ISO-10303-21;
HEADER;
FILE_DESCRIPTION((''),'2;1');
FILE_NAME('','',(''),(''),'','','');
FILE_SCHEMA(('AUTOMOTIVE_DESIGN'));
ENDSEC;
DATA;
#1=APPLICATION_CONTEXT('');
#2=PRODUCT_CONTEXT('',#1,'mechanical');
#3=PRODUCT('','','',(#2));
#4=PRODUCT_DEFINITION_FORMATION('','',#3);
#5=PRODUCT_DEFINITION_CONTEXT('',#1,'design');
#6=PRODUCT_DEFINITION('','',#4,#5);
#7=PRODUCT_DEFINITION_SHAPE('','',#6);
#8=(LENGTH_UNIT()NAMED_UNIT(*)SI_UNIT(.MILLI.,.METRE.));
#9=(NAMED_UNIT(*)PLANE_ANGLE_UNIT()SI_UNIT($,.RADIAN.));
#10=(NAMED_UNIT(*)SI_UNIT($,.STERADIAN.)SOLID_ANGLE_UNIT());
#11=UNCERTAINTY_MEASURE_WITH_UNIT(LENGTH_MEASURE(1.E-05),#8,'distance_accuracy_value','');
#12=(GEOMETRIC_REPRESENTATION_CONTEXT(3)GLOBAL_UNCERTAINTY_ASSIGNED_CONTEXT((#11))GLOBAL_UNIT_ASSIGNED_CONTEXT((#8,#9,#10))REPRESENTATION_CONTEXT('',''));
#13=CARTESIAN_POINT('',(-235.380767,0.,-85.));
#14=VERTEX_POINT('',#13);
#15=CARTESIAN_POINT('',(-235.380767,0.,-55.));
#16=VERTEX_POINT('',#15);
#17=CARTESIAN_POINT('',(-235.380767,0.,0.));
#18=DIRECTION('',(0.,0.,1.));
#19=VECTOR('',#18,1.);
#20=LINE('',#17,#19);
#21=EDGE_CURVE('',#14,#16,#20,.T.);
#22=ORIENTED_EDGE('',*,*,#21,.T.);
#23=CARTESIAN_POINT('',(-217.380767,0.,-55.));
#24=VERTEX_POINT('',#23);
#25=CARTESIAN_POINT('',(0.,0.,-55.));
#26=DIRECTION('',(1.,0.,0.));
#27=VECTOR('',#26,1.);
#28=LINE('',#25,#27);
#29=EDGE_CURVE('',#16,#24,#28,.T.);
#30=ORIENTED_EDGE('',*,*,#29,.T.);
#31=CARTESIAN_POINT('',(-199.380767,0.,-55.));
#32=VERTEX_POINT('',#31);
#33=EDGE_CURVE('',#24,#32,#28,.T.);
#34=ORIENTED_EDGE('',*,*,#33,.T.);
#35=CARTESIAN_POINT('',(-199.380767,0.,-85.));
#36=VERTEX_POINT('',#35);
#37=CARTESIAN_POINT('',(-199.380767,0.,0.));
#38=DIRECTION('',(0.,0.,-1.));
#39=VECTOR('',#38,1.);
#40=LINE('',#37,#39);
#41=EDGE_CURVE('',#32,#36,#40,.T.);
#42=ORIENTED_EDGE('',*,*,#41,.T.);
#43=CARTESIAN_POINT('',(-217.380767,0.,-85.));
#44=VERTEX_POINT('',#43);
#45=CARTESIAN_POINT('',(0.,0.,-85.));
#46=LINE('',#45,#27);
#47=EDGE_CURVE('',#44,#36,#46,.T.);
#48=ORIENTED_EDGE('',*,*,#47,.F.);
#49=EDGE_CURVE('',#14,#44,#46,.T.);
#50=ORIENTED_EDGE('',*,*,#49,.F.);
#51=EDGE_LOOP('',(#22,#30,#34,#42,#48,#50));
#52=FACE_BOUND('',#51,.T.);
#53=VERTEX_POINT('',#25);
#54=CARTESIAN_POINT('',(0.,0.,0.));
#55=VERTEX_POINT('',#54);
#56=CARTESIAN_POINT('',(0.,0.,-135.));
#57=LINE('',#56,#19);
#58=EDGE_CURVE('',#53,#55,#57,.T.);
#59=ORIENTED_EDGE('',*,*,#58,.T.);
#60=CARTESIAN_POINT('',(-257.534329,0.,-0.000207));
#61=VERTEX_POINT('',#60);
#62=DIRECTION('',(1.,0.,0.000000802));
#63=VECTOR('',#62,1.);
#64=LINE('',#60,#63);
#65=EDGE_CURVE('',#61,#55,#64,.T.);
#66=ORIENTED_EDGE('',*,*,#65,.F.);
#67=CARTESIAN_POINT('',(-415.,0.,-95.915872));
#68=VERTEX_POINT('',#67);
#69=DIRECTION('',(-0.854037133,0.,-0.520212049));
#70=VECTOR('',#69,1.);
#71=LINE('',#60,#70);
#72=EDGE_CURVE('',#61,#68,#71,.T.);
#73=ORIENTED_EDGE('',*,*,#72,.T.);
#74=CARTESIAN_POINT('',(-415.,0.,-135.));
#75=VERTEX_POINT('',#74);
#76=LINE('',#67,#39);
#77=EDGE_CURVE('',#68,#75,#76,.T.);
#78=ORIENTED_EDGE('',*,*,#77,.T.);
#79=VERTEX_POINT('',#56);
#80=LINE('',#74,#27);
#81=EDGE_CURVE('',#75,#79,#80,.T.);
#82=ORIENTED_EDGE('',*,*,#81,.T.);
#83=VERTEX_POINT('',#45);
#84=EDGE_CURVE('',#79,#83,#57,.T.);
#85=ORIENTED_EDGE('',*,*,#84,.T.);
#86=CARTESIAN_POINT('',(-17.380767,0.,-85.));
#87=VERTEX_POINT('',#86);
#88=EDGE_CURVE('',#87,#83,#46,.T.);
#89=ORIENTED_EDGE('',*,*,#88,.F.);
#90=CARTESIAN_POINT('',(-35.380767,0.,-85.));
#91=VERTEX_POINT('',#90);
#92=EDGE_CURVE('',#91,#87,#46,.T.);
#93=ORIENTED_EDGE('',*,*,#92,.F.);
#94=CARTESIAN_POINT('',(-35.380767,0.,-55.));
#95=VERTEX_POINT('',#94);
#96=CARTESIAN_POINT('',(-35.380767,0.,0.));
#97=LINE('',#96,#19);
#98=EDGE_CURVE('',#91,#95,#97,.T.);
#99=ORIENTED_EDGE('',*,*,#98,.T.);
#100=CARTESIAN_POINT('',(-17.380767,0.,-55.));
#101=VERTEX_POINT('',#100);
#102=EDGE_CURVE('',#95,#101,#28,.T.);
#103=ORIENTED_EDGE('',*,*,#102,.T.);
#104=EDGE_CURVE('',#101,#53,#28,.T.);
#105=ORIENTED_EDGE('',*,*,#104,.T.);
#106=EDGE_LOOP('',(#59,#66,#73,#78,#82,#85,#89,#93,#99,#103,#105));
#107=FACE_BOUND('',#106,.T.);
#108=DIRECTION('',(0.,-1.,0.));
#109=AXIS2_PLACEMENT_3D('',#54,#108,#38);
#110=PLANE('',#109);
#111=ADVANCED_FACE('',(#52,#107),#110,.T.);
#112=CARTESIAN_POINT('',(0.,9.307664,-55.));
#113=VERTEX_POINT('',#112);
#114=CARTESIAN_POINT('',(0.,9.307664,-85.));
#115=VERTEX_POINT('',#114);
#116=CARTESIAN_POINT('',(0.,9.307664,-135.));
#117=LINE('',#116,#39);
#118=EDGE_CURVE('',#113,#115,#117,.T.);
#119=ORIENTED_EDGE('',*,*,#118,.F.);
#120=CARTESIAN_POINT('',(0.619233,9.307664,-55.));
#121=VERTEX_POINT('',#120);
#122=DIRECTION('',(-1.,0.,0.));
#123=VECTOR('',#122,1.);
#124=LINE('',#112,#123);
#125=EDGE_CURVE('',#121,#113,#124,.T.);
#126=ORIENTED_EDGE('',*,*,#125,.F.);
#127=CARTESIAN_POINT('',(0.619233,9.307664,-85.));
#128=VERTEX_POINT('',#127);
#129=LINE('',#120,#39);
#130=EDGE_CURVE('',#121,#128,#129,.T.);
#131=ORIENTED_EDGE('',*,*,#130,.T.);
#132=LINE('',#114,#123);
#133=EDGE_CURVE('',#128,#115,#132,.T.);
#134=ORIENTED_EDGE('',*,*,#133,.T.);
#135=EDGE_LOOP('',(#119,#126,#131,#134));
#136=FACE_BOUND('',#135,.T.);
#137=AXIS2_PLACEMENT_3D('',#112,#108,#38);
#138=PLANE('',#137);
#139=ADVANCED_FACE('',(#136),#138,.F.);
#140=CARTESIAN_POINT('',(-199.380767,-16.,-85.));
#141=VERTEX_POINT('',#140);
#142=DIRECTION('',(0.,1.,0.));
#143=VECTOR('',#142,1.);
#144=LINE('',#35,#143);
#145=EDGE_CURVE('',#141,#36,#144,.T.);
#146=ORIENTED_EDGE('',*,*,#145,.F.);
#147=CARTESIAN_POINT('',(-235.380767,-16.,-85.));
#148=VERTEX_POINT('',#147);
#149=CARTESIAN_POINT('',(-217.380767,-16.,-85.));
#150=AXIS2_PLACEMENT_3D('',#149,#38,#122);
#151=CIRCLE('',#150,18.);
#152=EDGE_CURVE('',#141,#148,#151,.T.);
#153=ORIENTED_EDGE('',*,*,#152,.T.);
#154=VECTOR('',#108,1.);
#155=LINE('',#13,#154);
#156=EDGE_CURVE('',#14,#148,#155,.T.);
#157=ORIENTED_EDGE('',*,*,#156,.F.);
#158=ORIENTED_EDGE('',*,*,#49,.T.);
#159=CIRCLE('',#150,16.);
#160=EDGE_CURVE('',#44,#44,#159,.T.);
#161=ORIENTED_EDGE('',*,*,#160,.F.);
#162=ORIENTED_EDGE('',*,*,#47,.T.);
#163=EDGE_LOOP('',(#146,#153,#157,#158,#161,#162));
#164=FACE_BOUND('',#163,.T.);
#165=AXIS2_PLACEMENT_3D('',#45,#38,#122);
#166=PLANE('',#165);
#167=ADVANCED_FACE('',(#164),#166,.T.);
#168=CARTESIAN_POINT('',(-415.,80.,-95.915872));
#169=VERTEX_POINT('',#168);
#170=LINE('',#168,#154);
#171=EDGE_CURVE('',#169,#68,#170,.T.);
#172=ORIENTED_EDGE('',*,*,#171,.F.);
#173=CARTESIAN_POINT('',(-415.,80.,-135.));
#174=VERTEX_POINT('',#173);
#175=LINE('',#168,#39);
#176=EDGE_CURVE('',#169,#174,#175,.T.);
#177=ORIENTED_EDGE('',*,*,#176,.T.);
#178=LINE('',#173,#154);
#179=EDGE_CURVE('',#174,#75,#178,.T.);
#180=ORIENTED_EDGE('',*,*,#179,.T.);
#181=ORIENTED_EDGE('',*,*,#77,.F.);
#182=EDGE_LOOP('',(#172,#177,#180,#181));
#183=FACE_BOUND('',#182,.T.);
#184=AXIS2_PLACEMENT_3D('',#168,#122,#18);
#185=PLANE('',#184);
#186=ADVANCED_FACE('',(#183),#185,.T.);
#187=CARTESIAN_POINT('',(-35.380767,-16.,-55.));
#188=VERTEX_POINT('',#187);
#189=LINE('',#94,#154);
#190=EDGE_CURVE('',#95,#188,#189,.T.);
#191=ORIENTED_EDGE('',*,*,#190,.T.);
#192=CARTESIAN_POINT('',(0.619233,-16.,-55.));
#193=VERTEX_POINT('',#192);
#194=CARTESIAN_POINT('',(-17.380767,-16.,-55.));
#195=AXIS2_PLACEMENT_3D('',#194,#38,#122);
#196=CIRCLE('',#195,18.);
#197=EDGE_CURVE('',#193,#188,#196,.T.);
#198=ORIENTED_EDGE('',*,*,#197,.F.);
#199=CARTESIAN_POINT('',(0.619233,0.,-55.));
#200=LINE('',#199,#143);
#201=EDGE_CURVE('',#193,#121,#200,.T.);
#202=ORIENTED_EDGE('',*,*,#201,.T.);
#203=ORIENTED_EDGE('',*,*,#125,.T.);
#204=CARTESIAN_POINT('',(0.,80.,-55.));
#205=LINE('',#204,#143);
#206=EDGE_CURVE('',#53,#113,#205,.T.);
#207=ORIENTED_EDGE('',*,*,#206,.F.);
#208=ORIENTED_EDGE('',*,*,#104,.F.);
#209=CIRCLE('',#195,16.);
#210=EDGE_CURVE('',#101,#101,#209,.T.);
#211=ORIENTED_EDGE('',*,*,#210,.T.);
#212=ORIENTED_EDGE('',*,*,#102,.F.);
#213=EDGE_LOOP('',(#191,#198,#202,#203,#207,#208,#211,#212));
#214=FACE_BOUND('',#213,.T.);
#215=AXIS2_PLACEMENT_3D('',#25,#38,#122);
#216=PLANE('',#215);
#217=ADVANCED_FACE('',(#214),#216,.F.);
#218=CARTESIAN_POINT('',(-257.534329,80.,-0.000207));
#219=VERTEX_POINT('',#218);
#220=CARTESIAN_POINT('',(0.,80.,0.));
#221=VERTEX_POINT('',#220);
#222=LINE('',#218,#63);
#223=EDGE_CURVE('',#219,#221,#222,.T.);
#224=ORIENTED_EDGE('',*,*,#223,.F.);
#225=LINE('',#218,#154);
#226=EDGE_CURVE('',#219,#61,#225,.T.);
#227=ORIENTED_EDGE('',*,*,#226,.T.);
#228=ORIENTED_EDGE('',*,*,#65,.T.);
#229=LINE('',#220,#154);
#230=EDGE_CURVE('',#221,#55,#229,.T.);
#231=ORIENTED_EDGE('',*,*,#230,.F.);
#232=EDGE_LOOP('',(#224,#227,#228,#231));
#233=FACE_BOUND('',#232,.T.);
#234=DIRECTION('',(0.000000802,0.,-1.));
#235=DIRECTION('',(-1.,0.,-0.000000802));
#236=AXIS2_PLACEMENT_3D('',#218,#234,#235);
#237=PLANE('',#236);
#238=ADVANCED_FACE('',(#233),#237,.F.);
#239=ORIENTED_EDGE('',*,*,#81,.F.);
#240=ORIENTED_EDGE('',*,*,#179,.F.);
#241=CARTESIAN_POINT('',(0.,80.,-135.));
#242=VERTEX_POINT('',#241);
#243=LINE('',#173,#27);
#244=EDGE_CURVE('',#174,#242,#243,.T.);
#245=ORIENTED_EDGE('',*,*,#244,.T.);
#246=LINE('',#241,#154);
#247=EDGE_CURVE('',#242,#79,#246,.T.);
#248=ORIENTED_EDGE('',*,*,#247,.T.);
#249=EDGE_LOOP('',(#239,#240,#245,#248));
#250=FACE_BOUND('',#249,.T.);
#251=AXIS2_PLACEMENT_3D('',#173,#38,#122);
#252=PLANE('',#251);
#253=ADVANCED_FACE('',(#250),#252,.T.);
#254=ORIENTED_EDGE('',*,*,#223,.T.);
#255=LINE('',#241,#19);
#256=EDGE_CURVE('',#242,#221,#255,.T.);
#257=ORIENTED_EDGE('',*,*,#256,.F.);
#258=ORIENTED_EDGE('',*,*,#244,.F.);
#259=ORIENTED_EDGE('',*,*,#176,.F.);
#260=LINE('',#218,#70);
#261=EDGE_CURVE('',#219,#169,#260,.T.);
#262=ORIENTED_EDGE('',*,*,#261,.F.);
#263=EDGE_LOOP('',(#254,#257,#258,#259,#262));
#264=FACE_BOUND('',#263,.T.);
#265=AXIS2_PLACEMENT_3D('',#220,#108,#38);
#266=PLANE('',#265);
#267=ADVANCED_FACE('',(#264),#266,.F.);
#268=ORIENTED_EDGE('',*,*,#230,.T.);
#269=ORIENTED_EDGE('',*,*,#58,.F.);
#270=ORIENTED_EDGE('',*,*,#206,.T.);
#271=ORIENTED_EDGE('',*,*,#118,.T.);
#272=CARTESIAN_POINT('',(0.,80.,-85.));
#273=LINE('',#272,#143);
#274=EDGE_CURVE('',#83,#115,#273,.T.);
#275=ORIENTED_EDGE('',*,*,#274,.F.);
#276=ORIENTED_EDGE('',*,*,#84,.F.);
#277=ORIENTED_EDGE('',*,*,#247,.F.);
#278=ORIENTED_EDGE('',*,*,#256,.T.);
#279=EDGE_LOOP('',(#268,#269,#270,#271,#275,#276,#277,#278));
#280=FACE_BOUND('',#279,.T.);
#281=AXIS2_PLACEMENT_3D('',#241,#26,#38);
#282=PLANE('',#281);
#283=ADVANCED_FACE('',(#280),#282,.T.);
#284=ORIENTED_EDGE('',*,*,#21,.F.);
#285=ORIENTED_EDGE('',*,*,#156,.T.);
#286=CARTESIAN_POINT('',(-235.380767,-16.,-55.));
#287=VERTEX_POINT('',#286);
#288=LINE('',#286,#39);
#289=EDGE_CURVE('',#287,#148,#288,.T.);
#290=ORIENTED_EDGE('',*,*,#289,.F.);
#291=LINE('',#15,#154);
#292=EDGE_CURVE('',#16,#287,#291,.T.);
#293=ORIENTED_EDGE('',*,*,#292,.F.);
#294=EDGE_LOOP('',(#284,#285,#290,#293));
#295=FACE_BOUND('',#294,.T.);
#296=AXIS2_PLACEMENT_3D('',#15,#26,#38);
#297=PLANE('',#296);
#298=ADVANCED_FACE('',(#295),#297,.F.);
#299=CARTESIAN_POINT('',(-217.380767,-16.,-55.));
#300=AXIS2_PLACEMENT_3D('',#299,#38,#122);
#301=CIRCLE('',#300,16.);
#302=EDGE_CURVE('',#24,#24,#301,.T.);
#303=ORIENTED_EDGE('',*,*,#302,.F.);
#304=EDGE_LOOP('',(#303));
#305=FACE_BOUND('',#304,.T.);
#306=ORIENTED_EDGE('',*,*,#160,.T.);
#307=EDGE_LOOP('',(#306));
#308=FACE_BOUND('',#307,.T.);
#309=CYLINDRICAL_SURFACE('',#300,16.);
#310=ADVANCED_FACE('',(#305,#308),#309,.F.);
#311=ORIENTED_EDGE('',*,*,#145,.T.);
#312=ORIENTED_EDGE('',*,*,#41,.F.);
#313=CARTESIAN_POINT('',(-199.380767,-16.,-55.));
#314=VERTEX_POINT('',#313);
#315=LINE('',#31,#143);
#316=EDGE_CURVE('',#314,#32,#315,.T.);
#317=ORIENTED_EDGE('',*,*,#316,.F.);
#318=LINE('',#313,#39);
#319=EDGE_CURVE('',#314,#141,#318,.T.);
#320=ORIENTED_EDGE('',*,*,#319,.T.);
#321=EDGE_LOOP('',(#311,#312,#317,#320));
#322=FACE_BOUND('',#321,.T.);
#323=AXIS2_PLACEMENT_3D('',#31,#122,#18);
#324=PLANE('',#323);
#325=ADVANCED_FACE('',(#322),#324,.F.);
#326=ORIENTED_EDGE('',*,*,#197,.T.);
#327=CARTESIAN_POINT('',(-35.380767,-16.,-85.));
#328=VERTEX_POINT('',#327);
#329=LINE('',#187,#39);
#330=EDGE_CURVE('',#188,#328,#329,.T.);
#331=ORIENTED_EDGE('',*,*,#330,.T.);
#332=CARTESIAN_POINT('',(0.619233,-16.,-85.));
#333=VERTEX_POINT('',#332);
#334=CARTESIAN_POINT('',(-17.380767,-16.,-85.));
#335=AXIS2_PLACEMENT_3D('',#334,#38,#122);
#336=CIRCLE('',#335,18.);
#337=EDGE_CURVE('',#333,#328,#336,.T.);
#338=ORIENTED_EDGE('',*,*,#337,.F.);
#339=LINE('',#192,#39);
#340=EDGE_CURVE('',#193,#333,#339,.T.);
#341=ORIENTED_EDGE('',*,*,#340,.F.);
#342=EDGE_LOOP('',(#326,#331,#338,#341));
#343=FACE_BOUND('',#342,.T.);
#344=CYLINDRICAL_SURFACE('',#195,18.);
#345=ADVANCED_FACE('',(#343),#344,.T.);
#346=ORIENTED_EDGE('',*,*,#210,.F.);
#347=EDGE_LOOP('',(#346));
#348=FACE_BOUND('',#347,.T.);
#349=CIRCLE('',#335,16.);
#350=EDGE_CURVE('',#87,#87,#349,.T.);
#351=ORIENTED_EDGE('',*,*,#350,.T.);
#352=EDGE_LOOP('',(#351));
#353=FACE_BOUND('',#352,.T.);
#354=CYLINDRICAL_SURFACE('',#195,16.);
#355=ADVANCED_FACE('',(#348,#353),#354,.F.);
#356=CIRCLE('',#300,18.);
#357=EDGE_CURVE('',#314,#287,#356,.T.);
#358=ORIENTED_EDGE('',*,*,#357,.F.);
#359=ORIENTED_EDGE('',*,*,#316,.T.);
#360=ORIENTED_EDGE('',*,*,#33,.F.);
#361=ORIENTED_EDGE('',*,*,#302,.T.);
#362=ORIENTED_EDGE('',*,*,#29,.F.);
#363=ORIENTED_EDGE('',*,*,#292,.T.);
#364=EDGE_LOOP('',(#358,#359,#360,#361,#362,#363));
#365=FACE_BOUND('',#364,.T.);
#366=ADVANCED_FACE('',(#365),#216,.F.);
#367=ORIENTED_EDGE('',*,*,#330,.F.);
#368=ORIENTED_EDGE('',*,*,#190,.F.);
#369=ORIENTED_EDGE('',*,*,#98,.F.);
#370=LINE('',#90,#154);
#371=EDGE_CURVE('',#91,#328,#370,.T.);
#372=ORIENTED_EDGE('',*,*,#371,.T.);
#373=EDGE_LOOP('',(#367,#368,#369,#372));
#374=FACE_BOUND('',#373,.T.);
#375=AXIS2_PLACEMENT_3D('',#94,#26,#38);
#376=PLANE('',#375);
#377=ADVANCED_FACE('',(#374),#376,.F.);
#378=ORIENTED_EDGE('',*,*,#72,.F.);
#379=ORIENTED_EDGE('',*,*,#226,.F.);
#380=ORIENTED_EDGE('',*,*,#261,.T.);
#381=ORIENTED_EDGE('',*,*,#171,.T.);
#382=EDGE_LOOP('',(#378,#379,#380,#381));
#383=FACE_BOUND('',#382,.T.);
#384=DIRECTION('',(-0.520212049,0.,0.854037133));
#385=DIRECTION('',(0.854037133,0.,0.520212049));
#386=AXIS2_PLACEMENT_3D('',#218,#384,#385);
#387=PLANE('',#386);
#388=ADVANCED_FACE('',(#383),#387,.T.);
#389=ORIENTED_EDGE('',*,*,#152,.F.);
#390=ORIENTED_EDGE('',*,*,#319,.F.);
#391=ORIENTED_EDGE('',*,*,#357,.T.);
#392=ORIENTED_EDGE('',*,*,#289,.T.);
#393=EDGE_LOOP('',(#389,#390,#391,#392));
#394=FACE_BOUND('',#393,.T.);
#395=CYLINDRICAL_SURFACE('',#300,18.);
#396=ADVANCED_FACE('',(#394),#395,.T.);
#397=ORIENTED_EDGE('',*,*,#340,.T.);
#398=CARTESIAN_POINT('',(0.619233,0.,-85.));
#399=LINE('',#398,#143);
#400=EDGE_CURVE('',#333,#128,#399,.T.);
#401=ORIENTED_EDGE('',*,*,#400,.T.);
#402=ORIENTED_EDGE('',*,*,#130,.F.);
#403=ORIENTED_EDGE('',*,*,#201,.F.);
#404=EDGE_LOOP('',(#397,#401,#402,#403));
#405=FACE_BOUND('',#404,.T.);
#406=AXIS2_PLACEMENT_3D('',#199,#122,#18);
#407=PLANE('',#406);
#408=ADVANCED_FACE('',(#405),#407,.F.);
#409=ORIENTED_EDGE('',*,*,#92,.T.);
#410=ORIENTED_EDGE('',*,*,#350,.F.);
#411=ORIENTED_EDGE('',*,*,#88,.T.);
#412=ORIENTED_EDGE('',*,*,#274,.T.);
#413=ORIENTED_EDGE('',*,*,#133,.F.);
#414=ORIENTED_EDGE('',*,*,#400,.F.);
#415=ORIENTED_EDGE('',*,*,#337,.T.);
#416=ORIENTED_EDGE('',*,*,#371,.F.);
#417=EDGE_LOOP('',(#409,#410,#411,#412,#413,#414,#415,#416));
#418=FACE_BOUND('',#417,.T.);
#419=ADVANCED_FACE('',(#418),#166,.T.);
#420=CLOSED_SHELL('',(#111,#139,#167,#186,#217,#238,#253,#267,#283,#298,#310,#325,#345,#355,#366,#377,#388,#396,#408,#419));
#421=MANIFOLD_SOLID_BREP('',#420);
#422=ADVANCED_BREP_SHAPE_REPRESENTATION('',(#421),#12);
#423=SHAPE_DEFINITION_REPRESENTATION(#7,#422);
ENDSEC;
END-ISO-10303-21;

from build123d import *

# Parameters (mm, degrees)
Y_KSEKLIK_EKSTR_ZYON1_DEPTH = 80
Y_KSEKLIK_EKSTR_ZYON6_START = -50
IZIM4_R                     = 16
Y_KSEKLIK_EKSTR_ZYON6_DEPTH = 30


with BuildPart() as part:
    # Çizim3 → Yükseklik-Ekstrüzyon1 (new body)
    with BuildSketch(Plane(origin=(0, 0, 0), x_dir=(1, 0, 0), z_dir=(0, 1, 0))):
        Polygon((-257.534328512, 0.000206653), (-415, 95.915871832), (-415, 135), (0, 135), (0, 0), align=None)
    extrude(amount=Y_KSEKLIK_EKSTR_ZYON1_DEPTH)

    # Çizim4 → Yükseklik-Ekstrüzyon6 (add)
    # profile 1 of 2: a face of its own
    with BuildSketch(Plane(origin=(0, 0, -135), x_dir=(-1, 0, 0), z_dir=(0, 0, -1)).offset(Y_KSEKLIK_EKSTR_ZYON6_START)):
        with BuildLine():
            Line((199.380767456, 11.253885018), (199.380767456, -16))
            ThreePointArc((199.380767456, -16), (217.380767456, -34), (235.380767456, -16))
            Line((235.380767456, -16), (235.380767456, 11.253885018))
            Line((235.380767456, 11.253885018), (199.380767456, 11.253885018))
        make_face()
        with Locations((217.380767456, -16)):
            Circle(IZIM4_R, mode=Mode.SUBTRACT)
    # profile 2 of 2: a face of its own
    with BuildSketch(Plane(origin=(0, 0, -135), x_dir=(-1, 0, 0), z_dir=(0, 0, -1)).offset(Y_KSEKLIK_EKSTR_ZYON6_START)):
        with BuildLine():
            Line((-0.619232544, 9.307663541), (-0.619232544, -16))
            ThreePointArc((-0.619232544, -16), (17.380767456, -34), (35.380767456, -16))
            Line((35.380767456, -16), (35.380767456, 9.307663541))
            Line((35.380767456, 9.307663541), (-0.619232544, 9.307663541))
        make_face()
        with Locations((17.380767456, -16)):
            Circle(IZIM4_R, mode=Mode.SUBTRACT)
    extrude(amount=-Y_KSEKLIK_EKSTR_ZYON6_DEPTH)


solid = part.part
